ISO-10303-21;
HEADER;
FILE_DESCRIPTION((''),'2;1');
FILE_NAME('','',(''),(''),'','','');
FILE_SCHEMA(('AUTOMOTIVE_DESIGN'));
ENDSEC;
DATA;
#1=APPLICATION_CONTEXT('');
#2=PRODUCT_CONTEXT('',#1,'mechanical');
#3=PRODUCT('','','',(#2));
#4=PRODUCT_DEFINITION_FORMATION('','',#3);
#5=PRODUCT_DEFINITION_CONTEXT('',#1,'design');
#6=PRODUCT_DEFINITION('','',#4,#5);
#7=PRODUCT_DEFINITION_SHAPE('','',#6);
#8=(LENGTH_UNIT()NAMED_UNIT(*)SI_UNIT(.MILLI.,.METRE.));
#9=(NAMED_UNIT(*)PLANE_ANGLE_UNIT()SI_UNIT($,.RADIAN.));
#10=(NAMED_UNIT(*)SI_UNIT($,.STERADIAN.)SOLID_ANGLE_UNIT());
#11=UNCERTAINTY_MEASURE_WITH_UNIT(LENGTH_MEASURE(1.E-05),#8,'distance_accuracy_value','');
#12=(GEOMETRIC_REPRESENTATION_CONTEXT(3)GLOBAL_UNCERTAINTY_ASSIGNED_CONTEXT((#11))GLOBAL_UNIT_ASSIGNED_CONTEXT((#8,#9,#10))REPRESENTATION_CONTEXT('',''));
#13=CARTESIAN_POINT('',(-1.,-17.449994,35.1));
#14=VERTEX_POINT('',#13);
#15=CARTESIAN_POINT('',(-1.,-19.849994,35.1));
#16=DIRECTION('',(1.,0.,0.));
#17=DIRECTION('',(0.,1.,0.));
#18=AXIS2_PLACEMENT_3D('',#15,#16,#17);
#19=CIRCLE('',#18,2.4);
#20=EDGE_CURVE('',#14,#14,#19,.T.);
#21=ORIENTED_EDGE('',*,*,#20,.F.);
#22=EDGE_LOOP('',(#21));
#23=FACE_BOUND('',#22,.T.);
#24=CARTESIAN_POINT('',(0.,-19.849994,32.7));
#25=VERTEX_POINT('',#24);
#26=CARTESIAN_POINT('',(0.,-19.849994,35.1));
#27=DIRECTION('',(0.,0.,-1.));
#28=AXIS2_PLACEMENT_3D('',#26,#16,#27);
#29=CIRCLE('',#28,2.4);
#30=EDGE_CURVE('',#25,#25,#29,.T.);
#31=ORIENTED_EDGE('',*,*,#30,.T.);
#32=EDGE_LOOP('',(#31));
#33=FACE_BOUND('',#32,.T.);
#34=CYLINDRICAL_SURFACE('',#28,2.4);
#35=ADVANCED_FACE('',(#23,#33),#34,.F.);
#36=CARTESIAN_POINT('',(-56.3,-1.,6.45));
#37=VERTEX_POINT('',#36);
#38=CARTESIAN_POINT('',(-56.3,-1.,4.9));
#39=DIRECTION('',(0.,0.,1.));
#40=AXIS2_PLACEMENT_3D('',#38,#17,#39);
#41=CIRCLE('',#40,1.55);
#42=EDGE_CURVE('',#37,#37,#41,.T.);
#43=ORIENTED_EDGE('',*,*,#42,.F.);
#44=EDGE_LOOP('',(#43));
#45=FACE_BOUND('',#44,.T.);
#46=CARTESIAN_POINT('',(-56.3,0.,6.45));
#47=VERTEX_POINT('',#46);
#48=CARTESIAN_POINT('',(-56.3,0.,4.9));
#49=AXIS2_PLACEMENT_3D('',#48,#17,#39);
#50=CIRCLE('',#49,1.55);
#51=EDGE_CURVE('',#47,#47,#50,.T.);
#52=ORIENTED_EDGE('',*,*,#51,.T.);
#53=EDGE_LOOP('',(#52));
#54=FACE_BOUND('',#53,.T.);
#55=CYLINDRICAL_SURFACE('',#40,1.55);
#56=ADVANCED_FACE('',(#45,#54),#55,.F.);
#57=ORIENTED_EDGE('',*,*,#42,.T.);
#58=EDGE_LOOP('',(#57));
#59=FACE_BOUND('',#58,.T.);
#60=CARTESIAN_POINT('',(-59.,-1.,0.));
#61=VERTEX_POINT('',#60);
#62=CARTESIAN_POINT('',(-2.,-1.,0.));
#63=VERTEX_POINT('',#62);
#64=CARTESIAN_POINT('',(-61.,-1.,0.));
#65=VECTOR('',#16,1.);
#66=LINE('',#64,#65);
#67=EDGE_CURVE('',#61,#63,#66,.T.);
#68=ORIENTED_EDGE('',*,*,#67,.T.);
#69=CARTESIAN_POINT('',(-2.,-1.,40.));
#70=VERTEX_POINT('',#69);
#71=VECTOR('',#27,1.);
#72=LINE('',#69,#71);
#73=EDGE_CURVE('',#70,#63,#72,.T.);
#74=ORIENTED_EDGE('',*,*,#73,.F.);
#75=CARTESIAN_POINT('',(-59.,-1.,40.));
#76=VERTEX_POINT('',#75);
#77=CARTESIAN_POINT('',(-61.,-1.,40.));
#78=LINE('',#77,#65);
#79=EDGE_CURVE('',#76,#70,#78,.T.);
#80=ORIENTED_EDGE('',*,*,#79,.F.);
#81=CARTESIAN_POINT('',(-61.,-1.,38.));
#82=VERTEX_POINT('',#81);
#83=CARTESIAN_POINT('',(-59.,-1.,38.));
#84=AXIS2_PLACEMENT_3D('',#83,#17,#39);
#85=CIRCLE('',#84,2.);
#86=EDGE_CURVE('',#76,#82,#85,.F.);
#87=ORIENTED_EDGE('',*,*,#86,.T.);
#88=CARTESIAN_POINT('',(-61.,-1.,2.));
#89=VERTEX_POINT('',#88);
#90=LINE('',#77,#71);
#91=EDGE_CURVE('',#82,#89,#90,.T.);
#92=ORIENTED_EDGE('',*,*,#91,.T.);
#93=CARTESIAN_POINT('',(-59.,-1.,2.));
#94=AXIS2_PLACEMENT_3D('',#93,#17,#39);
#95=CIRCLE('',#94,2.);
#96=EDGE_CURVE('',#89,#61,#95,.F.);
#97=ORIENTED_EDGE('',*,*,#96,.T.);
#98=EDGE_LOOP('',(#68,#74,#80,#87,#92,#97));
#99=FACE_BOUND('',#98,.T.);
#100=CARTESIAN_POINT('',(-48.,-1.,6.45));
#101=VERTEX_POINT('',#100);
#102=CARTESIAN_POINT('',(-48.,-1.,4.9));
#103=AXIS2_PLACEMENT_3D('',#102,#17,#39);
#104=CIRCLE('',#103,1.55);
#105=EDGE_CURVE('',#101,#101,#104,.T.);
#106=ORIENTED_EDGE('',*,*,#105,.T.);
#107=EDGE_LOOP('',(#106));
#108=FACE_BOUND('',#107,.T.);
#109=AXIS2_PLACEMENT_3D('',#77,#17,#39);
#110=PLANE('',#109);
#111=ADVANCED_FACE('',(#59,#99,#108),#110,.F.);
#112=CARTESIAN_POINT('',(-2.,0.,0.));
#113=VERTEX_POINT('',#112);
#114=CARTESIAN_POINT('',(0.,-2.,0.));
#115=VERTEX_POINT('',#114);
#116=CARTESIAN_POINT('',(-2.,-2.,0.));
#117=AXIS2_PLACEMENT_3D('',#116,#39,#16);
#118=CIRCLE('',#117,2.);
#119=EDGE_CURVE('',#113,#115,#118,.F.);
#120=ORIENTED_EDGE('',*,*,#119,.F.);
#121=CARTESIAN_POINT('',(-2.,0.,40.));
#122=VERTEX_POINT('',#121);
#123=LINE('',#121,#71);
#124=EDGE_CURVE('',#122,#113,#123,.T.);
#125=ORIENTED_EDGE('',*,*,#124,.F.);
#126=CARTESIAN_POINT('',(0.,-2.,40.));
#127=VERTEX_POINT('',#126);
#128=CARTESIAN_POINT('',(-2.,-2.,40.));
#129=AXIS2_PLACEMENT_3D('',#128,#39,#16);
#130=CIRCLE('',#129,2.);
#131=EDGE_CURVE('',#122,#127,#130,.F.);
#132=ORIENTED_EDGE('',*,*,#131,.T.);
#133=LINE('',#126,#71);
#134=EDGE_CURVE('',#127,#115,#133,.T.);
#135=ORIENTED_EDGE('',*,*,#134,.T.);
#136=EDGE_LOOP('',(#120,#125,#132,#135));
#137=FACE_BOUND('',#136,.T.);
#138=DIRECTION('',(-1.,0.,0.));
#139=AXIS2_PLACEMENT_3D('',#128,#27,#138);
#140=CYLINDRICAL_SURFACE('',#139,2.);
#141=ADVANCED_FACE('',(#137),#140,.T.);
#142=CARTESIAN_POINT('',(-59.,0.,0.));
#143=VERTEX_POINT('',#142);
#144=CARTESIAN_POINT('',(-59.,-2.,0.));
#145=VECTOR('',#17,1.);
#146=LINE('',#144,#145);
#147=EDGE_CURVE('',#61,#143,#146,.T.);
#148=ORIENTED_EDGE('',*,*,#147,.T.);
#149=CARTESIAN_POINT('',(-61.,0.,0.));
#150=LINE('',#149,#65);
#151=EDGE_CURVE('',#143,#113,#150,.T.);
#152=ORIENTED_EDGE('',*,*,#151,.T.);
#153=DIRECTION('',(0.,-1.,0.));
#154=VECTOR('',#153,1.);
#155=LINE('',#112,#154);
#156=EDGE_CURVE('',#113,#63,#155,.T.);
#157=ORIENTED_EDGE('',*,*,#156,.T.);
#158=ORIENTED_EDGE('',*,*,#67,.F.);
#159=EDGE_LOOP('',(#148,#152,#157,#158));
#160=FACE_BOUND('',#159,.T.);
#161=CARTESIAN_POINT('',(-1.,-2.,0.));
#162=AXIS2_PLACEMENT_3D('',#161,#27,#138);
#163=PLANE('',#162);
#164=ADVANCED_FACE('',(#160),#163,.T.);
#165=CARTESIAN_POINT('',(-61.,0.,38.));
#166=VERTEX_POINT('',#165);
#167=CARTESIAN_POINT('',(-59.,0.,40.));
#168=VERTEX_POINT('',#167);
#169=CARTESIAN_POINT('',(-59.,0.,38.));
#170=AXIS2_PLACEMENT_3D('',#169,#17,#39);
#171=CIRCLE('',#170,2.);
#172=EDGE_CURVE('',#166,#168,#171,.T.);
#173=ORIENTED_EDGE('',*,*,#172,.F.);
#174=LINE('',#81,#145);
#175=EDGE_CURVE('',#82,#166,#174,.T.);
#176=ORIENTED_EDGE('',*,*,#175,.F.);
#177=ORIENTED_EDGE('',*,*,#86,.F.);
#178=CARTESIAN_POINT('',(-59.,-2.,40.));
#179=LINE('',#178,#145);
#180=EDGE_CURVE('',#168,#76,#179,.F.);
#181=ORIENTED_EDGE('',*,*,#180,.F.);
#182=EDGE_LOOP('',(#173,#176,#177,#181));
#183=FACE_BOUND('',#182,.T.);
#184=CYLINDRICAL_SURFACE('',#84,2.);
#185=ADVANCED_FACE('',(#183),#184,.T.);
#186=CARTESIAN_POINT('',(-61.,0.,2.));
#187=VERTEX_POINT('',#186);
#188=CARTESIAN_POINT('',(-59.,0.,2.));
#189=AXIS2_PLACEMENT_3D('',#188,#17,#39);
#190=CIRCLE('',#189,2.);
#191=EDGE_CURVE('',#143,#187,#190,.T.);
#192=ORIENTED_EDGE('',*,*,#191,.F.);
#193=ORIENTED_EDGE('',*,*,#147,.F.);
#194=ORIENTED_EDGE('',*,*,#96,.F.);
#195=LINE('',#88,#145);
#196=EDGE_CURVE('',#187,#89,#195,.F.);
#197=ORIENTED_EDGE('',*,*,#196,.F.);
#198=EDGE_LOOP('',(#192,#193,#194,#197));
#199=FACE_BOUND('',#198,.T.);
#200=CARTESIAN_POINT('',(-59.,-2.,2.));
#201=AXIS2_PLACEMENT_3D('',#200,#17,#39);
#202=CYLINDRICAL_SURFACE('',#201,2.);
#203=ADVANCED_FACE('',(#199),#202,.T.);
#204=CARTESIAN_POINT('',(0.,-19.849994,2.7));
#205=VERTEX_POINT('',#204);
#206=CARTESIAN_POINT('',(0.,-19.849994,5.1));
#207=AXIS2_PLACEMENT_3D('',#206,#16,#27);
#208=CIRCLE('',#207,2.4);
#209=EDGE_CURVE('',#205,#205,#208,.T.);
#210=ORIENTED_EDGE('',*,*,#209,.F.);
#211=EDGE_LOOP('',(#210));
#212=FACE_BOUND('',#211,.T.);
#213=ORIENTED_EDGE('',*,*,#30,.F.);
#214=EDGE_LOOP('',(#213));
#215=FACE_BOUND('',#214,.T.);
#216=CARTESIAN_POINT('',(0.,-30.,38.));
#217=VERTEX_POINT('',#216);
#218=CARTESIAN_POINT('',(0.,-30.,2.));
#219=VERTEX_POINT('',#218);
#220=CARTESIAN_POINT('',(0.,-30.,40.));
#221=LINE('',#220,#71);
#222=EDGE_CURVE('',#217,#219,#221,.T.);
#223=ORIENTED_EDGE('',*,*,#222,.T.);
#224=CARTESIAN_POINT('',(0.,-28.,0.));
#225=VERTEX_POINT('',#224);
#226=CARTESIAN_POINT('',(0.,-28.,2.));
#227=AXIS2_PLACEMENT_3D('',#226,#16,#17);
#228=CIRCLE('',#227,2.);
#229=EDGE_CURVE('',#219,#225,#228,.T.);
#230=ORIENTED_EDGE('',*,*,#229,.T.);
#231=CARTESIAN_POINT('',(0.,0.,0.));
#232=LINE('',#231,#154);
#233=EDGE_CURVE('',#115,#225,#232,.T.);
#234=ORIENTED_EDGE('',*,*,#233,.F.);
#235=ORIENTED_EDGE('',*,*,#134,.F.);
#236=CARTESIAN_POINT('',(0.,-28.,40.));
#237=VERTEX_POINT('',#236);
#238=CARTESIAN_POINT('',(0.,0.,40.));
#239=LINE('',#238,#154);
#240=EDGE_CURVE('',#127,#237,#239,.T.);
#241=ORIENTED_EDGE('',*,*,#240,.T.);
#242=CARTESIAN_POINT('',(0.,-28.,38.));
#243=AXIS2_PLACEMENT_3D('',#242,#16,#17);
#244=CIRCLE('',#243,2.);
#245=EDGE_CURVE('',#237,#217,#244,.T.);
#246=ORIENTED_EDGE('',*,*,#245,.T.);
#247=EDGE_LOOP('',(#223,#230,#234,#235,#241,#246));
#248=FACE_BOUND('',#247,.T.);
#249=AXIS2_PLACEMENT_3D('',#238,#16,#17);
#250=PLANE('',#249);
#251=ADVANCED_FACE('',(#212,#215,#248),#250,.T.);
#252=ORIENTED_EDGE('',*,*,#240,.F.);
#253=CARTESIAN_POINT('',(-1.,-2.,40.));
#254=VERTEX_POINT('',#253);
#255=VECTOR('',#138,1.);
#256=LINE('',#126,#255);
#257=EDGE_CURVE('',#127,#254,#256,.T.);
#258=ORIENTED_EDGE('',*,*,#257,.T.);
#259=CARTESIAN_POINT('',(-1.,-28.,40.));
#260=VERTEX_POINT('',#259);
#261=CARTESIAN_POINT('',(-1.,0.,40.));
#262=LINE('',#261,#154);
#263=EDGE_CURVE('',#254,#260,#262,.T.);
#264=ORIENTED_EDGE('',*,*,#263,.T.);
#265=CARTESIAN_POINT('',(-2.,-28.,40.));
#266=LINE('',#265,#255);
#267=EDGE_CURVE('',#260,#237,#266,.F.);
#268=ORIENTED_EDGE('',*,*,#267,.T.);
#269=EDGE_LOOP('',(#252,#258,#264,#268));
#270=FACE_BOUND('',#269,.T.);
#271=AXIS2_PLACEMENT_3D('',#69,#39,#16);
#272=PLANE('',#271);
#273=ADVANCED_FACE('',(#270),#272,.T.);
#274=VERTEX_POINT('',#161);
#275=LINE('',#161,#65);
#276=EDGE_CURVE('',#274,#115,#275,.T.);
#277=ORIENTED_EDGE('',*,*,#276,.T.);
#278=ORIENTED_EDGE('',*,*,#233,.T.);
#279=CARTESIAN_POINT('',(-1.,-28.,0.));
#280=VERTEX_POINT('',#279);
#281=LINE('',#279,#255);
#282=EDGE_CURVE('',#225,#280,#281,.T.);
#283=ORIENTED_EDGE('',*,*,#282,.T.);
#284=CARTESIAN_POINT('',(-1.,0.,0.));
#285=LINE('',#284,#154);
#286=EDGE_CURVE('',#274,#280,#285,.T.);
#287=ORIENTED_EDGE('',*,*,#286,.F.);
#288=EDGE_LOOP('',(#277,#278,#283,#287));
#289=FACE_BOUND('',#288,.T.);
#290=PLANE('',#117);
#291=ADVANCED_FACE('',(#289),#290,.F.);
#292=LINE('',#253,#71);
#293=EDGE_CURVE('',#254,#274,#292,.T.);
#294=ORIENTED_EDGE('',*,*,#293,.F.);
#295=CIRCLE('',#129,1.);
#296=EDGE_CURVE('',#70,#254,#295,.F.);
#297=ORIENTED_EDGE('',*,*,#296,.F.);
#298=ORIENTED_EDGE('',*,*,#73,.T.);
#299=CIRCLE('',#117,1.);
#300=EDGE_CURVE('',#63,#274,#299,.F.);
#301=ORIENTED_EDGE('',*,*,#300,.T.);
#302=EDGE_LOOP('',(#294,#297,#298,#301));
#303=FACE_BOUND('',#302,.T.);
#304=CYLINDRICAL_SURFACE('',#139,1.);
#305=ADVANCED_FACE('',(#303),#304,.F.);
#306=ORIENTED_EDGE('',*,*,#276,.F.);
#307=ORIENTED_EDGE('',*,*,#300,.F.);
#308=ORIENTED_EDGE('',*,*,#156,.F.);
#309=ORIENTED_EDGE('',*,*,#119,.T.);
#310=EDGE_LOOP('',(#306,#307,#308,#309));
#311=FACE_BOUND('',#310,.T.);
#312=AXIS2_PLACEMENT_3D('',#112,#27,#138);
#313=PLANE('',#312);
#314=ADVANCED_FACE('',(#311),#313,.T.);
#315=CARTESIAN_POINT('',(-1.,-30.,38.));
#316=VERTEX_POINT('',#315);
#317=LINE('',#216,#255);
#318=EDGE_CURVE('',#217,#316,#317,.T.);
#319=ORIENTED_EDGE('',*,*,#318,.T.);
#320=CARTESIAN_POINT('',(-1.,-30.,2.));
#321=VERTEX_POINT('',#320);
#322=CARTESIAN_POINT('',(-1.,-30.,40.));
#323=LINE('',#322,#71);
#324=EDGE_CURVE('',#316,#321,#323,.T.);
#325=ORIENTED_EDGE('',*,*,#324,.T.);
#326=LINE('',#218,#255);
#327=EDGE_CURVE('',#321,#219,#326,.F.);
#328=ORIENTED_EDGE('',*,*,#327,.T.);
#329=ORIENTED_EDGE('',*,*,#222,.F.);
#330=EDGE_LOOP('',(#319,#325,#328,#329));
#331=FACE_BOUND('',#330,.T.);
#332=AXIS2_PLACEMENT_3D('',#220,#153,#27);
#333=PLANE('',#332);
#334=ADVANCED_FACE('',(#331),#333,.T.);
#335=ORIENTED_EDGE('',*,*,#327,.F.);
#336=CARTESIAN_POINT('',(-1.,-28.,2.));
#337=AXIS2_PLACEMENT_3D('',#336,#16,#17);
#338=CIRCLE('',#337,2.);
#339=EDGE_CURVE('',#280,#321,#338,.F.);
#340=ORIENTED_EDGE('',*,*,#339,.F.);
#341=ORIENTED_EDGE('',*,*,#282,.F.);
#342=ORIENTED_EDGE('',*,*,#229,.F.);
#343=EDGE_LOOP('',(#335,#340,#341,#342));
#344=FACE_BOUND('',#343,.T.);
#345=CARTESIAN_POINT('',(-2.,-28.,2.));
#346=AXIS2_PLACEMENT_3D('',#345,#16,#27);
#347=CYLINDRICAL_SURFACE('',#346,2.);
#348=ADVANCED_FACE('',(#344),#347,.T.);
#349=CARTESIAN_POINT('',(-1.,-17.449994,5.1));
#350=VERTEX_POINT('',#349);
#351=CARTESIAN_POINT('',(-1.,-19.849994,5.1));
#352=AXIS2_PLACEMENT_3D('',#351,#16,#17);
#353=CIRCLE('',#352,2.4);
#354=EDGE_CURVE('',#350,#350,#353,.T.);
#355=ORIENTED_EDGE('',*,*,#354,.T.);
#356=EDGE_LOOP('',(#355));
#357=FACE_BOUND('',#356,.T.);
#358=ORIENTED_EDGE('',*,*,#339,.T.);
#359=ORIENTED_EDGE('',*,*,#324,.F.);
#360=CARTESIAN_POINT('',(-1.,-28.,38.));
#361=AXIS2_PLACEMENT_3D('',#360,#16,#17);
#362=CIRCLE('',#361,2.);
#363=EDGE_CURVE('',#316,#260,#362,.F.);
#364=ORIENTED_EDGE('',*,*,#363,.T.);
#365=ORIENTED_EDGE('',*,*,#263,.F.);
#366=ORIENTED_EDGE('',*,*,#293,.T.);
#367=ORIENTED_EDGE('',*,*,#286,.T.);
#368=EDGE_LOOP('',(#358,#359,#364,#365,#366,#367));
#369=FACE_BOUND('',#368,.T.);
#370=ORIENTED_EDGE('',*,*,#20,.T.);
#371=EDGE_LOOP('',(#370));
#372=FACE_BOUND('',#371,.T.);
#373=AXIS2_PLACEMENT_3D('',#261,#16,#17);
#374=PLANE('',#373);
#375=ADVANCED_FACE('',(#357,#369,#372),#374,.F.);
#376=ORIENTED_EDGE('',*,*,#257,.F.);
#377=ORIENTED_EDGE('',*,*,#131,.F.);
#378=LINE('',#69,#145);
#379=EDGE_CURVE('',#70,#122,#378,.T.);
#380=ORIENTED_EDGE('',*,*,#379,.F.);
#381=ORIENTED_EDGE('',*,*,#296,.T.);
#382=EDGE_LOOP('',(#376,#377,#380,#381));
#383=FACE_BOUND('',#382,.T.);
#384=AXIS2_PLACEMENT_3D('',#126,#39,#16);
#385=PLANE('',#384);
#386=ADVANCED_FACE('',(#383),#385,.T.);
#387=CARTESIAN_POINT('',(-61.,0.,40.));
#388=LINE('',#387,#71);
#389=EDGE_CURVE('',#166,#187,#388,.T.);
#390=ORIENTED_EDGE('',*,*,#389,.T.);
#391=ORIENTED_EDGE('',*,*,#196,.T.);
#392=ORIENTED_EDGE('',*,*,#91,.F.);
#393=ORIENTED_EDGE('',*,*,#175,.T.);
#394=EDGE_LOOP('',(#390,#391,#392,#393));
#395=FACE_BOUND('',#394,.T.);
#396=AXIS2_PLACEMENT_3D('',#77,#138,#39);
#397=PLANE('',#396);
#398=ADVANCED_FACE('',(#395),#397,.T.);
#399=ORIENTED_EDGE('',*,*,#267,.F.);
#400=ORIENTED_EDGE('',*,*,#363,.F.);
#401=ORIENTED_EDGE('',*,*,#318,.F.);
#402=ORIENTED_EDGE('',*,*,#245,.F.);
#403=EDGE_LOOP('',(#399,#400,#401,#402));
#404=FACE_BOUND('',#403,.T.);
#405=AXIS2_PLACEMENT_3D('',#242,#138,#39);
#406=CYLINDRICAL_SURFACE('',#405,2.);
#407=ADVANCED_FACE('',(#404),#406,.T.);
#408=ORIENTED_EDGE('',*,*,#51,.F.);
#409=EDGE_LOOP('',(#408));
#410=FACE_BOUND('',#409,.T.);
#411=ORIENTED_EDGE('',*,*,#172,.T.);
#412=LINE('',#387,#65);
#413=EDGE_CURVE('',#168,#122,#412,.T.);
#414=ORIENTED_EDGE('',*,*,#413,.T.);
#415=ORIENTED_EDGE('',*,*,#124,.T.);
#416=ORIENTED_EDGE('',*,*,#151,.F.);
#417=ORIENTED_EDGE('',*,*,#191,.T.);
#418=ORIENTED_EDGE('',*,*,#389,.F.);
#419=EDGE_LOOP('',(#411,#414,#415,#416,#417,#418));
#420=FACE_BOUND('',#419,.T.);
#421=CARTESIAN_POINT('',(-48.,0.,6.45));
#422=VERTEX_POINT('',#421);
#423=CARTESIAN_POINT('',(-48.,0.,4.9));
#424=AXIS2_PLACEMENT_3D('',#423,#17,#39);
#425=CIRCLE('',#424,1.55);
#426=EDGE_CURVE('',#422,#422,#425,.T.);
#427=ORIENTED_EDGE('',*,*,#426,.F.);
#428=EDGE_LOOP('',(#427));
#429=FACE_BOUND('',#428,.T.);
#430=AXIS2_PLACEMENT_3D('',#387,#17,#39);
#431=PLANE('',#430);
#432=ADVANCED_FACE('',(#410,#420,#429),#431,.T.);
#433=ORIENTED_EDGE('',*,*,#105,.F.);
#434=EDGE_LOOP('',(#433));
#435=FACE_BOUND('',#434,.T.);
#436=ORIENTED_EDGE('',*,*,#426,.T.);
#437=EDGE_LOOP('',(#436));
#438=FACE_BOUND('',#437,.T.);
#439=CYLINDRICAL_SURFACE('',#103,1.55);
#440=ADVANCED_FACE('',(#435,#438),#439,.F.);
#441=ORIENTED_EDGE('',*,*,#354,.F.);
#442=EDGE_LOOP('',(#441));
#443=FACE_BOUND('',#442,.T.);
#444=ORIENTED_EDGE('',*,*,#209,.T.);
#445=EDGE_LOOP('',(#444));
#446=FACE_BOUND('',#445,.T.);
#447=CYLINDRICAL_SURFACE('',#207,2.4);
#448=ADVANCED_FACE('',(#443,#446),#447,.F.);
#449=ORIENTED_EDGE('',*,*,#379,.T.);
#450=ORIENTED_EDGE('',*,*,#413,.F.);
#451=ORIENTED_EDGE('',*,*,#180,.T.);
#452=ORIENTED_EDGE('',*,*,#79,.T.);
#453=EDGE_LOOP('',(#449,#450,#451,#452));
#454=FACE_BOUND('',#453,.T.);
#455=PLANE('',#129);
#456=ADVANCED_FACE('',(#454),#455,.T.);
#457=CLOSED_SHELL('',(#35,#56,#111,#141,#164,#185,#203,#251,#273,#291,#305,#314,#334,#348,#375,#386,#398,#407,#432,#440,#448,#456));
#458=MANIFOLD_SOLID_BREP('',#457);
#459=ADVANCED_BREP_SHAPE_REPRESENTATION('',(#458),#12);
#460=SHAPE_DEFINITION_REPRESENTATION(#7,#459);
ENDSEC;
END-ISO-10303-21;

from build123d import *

# Parameters (mm, degrees)
BASE_FLANGE1_DEPTH   = 40
FILLET1_R            = 2
SKETCH6_R            = 1.55
CUT_EXTRUDE1_DEPTH   = 10
M4_CLEARANCE_HOLE1_D = 4.8


# Sheet-metal steps are written as plain solids
with BuildPart() as part:
    # Sketch1 → Base-Flange1 (new body)
    with BuildSketch(Plane.XY):
        with BuildLine():
            Line((-61, 0), (-2, 0))
            ThreePointArc((-2, 0), (-0.585786438, -0.585786438), (0, -2))
            Line((0, -2), (0, -30))
            Line((0, -30), (-1, -30))
            Line((-1, -30), (-1, -2))
            ThreePointArc((-1, -2), (-1.292893219, -1.292893219), (-2, -1))
            Line((-2, -1), (-61, -1))
            Line((-61, -1), (-61, 0))
        make_face()
    extrude(amount=BASE_FLANGE1_DEPTH)

    # Fillet1
    fillet1_edges = [part.edges().sort_by_distance(p)[0] for p in [
        (-61, -0.5, 40),
        (-61, -0.5, 0),
        (-0.5, -30, 40),
        (-0.5, -30, 0),
    ]]
    fillet(fillet1_edges, radius=FILLET1_R)

    # Sketch6 → Cut-Extrude1 (cut)
    with BuildSketch(Plane(origin=(0, 0, 0), x_dir=(1, 0, 0), z_dir=(0, 1, 0))):
        with Locations(Location((-56.3, -4.9, 0), (0, 0, 270))):
            Circle(SKETCH6_R)
        with Locations(Location((-48, -4.9, 0), (0, 0, 270))):
            Circle(SKETCH6_R)
    extrude(amount=-CUT_EXTRUDE1_DEPTH, mode=Mode.SUBTRACT)

    # M4 Clearance Hole1 (through all)
    with Locations(Plane(origin=(0, 0, 0), x_dir=(0, 0, -1), z_dir=(1, 0, 0))):
        with Locations((-35.1, -19.849994255), (-5.1, -19.849994255)):
            Hole(M4_CLEARANCE_HOLE1_D / 2)


solid = part.part
